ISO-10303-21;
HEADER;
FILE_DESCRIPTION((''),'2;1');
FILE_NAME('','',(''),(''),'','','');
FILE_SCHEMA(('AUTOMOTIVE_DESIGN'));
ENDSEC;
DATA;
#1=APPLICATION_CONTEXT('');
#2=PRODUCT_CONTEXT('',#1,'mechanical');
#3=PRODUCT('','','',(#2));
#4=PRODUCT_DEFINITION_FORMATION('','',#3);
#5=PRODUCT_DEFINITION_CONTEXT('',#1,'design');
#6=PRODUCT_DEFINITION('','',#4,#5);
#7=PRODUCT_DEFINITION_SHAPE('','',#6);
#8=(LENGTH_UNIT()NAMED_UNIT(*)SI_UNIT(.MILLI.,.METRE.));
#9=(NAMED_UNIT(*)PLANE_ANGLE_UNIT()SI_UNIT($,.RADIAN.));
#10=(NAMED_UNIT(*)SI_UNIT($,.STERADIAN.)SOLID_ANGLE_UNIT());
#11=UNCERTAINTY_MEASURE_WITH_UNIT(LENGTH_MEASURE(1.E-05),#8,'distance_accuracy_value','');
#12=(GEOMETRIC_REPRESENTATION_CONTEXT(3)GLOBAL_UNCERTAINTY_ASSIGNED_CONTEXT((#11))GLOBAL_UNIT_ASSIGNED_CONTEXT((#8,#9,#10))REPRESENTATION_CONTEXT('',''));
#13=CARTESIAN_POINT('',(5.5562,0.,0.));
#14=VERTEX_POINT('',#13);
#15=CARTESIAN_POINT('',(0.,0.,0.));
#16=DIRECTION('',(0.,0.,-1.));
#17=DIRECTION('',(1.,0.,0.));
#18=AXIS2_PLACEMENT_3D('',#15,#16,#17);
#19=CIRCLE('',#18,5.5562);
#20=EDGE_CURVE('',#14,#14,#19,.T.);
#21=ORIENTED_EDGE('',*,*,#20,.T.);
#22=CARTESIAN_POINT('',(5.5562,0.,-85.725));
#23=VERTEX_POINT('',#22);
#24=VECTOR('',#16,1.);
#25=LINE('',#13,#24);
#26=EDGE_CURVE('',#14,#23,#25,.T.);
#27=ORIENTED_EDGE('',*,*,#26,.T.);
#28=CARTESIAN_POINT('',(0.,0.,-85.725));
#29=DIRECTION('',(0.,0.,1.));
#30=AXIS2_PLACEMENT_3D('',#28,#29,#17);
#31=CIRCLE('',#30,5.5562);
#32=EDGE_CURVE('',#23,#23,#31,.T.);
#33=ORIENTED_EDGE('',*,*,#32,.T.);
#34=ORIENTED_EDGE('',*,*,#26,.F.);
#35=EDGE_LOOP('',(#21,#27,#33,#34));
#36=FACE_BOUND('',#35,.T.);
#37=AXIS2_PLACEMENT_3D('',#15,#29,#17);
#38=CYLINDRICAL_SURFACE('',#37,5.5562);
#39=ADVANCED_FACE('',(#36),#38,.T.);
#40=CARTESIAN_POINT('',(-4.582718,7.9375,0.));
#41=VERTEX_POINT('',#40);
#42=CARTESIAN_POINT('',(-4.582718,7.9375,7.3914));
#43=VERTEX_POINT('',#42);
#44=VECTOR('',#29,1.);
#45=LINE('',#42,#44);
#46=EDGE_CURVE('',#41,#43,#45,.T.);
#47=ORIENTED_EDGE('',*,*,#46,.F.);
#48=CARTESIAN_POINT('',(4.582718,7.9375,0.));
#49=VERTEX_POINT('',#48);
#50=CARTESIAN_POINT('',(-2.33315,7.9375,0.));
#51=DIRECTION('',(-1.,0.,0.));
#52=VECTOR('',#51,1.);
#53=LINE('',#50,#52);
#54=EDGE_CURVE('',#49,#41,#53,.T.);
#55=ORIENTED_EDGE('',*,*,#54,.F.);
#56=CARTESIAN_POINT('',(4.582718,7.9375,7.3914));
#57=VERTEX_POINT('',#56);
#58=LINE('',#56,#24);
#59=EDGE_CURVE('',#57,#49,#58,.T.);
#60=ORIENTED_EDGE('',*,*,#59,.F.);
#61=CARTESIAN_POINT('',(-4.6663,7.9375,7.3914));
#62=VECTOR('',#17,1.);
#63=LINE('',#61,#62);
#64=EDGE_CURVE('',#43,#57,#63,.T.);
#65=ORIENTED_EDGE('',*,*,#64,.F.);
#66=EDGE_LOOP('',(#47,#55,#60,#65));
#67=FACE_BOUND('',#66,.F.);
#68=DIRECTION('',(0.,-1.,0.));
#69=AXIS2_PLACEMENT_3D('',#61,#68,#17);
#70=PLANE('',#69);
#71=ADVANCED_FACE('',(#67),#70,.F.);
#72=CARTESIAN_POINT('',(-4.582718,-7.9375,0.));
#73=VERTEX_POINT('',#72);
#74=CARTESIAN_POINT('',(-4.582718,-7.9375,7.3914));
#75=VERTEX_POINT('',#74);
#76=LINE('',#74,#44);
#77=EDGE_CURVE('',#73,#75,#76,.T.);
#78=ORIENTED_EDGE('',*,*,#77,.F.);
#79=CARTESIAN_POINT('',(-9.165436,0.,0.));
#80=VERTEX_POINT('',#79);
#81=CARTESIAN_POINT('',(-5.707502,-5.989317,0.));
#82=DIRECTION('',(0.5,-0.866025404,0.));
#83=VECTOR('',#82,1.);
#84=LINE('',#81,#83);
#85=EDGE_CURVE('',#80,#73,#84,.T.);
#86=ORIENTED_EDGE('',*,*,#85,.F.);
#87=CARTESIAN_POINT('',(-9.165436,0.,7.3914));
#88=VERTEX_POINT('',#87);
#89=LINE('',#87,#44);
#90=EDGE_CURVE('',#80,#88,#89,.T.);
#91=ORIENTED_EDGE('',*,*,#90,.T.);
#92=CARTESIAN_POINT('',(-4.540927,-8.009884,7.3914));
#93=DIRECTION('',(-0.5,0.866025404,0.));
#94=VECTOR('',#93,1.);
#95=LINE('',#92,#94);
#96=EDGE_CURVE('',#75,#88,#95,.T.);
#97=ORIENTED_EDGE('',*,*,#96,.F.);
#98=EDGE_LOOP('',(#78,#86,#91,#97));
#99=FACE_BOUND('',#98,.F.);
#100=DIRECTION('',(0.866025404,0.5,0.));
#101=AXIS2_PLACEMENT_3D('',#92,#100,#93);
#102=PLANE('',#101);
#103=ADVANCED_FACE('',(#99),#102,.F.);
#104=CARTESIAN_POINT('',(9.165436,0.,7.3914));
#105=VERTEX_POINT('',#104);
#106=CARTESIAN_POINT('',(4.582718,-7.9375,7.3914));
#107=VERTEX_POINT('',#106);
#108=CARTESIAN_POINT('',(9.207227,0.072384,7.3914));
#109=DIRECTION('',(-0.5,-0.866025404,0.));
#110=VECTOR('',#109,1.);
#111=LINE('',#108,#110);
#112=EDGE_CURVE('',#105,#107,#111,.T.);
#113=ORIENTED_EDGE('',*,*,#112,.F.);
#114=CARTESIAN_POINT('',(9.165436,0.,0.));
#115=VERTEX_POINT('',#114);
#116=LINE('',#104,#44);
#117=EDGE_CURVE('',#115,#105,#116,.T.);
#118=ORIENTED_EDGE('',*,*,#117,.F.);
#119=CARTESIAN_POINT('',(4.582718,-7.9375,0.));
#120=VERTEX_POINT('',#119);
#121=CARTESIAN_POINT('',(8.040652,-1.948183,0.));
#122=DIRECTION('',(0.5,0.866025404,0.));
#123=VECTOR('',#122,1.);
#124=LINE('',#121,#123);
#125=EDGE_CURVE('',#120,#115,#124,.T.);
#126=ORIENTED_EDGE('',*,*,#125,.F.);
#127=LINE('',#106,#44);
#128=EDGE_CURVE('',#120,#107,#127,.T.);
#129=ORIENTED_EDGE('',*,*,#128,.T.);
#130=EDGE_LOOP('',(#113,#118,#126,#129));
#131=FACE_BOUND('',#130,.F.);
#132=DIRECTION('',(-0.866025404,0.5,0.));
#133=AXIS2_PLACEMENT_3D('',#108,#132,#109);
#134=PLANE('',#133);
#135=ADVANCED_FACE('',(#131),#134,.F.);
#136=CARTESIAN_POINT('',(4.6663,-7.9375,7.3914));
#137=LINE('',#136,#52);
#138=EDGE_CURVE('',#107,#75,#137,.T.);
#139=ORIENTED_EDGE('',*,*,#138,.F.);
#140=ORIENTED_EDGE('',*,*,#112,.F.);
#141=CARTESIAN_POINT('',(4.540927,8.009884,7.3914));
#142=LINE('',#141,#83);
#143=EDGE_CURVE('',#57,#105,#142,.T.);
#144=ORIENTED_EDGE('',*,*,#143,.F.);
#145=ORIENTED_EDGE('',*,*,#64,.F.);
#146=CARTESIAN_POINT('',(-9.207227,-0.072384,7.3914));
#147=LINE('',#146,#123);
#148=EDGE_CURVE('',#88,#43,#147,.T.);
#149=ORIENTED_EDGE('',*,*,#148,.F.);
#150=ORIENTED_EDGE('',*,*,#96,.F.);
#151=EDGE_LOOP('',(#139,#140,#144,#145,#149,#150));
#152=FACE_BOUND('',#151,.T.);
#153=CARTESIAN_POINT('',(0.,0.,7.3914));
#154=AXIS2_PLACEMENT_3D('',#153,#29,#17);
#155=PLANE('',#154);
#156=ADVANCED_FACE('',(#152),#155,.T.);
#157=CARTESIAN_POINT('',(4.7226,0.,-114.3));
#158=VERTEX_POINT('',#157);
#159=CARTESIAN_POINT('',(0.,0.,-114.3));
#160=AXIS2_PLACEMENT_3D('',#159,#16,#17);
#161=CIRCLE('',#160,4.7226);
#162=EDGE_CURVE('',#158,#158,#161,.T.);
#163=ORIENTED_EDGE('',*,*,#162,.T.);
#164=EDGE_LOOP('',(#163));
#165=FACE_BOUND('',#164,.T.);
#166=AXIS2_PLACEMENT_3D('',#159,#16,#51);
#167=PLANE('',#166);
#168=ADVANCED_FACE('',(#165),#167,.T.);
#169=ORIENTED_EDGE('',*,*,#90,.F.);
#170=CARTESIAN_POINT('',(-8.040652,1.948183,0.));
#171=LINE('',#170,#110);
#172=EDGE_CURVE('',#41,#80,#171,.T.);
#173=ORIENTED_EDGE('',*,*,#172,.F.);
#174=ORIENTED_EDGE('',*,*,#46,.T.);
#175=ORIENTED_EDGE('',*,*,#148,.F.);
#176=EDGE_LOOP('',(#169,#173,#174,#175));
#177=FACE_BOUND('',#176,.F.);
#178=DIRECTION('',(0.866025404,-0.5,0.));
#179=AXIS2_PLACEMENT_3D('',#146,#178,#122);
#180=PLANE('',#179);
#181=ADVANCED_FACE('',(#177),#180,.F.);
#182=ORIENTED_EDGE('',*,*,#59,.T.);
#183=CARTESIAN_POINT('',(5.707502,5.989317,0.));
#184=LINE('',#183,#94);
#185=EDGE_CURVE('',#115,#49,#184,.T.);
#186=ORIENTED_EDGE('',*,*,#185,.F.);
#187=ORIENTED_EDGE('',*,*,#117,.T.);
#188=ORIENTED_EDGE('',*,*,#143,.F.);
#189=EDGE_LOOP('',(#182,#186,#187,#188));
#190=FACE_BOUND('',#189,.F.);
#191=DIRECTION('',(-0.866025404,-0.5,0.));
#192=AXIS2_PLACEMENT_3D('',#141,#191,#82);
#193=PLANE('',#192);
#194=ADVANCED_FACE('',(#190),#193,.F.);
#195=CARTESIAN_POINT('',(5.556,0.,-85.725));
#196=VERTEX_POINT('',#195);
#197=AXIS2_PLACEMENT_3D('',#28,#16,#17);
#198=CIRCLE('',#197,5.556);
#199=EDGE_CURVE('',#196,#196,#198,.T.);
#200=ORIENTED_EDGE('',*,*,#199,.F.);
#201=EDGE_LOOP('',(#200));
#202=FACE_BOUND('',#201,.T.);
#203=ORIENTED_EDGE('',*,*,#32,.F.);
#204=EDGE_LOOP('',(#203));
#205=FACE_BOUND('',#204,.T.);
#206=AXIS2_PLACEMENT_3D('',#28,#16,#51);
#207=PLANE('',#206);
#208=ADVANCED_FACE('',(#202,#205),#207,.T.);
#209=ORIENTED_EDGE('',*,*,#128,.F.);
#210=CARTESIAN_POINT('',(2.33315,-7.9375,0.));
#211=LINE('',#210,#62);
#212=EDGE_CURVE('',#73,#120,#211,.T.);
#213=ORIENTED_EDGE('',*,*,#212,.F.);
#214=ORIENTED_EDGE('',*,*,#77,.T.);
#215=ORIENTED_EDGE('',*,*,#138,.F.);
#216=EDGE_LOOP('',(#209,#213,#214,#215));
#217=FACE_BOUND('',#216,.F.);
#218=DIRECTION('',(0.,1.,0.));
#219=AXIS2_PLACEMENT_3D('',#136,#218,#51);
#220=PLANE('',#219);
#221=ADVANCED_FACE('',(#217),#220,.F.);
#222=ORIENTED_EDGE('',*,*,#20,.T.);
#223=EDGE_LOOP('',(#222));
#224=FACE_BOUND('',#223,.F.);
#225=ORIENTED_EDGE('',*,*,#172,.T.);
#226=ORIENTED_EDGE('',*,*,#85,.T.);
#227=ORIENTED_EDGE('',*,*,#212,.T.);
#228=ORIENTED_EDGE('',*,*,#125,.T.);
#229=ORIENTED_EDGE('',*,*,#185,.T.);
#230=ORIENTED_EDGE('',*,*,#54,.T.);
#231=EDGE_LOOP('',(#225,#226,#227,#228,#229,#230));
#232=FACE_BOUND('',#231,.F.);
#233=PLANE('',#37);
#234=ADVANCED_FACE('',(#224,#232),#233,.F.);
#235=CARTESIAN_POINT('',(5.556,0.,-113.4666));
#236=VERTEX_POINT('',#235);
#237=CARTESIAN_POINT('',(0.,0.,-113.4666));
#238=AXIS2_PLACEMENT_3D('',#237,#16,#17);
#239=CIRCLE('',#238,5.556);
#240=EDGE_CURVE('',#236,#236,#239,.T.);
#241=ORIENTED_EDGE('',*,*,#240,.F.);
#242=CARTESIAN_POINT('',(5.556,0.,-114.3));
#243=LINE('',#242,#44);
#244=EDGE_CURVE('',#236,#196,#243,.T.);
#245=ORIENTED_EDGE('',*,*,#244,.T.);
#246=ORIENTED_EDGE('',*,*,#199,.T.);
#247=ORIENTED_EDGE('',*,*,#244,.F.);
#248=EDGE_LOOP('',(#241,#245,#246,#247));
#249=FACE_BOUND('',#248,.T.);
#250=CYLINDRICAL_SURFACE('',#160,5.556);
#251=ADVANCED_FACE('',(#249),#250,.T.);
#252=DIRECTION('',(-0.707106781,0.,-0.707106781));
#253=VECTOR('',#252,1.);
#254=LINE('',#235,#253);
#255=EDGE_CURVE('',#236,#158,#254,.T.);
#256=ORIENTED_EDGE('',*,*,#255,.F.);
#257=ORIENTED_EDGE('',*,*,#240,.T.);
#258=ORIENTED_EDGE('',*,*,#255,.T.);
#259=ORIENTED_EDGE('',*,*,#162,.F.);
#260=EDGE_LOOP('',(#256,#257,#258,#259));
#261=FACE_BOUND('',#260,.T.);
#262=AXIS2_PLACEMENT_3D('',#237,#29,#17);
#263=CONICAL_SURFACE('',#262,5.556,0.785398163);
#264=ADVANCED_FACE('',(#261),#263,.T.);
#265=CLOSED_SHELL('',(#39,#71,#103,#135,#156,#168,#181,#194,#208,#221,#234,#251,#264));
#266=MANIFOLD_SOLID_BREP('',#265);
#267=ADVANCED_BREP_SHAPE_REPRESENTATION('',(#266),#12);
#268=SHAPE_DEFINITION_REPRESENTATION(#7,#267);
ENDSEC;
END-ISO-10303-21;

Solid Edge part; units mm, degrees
sketch "Sketch1" plane through (0, 0, 0) normal (0, 0, 1) x (1, 0, 0)
  circle A0 centre (0, 0) radius 9.2075
  dimension "D1" = 18.415
extrude "Protrusion1" add sketch "Sketch1" along normal blind 7.3914
sketch "Sketch2" plane through (0, 0, 0) normal (0, 0, -1) x (1, 0, 0)
  circle A0 centre (0, 0) radius 5.5562
extrude "Protrusion2" add sketch "Sketch2" along normal blind 114.3
sketch "Sketch3" plane through (0, 0, -114.3) normal (0, 0, -1) x (1, 0, 0)
  circle A0 centre (0, 0) radius 5.556
extrude "Cutout1" cut sketch "Sketch3" against normal blind 28.575 flip side to cut
chamfer "Chamfer_1" distance 0.8334 angle 45 1 edges at (-5.556, 0, -114.3)
sketch "Sketch4" plane through (0, 0, 7.3914) normal (0, 0, 1) x (1, 0, 0)
  line L0 (-4.6663, 7.9375) -> (4.6663, 7.9375)
  dimension "D1" = 15.875
extrude "Cutout2" cut sketch "Sketch4" against normal up to next material side at (0, 7.9875, 7.3914)
pattern_circular "Pattern1" count 6 over 360 about axis through (0, 0, 7.3914) along (0, 0, 1) of "Cutout2"
properties part number "24100029"
